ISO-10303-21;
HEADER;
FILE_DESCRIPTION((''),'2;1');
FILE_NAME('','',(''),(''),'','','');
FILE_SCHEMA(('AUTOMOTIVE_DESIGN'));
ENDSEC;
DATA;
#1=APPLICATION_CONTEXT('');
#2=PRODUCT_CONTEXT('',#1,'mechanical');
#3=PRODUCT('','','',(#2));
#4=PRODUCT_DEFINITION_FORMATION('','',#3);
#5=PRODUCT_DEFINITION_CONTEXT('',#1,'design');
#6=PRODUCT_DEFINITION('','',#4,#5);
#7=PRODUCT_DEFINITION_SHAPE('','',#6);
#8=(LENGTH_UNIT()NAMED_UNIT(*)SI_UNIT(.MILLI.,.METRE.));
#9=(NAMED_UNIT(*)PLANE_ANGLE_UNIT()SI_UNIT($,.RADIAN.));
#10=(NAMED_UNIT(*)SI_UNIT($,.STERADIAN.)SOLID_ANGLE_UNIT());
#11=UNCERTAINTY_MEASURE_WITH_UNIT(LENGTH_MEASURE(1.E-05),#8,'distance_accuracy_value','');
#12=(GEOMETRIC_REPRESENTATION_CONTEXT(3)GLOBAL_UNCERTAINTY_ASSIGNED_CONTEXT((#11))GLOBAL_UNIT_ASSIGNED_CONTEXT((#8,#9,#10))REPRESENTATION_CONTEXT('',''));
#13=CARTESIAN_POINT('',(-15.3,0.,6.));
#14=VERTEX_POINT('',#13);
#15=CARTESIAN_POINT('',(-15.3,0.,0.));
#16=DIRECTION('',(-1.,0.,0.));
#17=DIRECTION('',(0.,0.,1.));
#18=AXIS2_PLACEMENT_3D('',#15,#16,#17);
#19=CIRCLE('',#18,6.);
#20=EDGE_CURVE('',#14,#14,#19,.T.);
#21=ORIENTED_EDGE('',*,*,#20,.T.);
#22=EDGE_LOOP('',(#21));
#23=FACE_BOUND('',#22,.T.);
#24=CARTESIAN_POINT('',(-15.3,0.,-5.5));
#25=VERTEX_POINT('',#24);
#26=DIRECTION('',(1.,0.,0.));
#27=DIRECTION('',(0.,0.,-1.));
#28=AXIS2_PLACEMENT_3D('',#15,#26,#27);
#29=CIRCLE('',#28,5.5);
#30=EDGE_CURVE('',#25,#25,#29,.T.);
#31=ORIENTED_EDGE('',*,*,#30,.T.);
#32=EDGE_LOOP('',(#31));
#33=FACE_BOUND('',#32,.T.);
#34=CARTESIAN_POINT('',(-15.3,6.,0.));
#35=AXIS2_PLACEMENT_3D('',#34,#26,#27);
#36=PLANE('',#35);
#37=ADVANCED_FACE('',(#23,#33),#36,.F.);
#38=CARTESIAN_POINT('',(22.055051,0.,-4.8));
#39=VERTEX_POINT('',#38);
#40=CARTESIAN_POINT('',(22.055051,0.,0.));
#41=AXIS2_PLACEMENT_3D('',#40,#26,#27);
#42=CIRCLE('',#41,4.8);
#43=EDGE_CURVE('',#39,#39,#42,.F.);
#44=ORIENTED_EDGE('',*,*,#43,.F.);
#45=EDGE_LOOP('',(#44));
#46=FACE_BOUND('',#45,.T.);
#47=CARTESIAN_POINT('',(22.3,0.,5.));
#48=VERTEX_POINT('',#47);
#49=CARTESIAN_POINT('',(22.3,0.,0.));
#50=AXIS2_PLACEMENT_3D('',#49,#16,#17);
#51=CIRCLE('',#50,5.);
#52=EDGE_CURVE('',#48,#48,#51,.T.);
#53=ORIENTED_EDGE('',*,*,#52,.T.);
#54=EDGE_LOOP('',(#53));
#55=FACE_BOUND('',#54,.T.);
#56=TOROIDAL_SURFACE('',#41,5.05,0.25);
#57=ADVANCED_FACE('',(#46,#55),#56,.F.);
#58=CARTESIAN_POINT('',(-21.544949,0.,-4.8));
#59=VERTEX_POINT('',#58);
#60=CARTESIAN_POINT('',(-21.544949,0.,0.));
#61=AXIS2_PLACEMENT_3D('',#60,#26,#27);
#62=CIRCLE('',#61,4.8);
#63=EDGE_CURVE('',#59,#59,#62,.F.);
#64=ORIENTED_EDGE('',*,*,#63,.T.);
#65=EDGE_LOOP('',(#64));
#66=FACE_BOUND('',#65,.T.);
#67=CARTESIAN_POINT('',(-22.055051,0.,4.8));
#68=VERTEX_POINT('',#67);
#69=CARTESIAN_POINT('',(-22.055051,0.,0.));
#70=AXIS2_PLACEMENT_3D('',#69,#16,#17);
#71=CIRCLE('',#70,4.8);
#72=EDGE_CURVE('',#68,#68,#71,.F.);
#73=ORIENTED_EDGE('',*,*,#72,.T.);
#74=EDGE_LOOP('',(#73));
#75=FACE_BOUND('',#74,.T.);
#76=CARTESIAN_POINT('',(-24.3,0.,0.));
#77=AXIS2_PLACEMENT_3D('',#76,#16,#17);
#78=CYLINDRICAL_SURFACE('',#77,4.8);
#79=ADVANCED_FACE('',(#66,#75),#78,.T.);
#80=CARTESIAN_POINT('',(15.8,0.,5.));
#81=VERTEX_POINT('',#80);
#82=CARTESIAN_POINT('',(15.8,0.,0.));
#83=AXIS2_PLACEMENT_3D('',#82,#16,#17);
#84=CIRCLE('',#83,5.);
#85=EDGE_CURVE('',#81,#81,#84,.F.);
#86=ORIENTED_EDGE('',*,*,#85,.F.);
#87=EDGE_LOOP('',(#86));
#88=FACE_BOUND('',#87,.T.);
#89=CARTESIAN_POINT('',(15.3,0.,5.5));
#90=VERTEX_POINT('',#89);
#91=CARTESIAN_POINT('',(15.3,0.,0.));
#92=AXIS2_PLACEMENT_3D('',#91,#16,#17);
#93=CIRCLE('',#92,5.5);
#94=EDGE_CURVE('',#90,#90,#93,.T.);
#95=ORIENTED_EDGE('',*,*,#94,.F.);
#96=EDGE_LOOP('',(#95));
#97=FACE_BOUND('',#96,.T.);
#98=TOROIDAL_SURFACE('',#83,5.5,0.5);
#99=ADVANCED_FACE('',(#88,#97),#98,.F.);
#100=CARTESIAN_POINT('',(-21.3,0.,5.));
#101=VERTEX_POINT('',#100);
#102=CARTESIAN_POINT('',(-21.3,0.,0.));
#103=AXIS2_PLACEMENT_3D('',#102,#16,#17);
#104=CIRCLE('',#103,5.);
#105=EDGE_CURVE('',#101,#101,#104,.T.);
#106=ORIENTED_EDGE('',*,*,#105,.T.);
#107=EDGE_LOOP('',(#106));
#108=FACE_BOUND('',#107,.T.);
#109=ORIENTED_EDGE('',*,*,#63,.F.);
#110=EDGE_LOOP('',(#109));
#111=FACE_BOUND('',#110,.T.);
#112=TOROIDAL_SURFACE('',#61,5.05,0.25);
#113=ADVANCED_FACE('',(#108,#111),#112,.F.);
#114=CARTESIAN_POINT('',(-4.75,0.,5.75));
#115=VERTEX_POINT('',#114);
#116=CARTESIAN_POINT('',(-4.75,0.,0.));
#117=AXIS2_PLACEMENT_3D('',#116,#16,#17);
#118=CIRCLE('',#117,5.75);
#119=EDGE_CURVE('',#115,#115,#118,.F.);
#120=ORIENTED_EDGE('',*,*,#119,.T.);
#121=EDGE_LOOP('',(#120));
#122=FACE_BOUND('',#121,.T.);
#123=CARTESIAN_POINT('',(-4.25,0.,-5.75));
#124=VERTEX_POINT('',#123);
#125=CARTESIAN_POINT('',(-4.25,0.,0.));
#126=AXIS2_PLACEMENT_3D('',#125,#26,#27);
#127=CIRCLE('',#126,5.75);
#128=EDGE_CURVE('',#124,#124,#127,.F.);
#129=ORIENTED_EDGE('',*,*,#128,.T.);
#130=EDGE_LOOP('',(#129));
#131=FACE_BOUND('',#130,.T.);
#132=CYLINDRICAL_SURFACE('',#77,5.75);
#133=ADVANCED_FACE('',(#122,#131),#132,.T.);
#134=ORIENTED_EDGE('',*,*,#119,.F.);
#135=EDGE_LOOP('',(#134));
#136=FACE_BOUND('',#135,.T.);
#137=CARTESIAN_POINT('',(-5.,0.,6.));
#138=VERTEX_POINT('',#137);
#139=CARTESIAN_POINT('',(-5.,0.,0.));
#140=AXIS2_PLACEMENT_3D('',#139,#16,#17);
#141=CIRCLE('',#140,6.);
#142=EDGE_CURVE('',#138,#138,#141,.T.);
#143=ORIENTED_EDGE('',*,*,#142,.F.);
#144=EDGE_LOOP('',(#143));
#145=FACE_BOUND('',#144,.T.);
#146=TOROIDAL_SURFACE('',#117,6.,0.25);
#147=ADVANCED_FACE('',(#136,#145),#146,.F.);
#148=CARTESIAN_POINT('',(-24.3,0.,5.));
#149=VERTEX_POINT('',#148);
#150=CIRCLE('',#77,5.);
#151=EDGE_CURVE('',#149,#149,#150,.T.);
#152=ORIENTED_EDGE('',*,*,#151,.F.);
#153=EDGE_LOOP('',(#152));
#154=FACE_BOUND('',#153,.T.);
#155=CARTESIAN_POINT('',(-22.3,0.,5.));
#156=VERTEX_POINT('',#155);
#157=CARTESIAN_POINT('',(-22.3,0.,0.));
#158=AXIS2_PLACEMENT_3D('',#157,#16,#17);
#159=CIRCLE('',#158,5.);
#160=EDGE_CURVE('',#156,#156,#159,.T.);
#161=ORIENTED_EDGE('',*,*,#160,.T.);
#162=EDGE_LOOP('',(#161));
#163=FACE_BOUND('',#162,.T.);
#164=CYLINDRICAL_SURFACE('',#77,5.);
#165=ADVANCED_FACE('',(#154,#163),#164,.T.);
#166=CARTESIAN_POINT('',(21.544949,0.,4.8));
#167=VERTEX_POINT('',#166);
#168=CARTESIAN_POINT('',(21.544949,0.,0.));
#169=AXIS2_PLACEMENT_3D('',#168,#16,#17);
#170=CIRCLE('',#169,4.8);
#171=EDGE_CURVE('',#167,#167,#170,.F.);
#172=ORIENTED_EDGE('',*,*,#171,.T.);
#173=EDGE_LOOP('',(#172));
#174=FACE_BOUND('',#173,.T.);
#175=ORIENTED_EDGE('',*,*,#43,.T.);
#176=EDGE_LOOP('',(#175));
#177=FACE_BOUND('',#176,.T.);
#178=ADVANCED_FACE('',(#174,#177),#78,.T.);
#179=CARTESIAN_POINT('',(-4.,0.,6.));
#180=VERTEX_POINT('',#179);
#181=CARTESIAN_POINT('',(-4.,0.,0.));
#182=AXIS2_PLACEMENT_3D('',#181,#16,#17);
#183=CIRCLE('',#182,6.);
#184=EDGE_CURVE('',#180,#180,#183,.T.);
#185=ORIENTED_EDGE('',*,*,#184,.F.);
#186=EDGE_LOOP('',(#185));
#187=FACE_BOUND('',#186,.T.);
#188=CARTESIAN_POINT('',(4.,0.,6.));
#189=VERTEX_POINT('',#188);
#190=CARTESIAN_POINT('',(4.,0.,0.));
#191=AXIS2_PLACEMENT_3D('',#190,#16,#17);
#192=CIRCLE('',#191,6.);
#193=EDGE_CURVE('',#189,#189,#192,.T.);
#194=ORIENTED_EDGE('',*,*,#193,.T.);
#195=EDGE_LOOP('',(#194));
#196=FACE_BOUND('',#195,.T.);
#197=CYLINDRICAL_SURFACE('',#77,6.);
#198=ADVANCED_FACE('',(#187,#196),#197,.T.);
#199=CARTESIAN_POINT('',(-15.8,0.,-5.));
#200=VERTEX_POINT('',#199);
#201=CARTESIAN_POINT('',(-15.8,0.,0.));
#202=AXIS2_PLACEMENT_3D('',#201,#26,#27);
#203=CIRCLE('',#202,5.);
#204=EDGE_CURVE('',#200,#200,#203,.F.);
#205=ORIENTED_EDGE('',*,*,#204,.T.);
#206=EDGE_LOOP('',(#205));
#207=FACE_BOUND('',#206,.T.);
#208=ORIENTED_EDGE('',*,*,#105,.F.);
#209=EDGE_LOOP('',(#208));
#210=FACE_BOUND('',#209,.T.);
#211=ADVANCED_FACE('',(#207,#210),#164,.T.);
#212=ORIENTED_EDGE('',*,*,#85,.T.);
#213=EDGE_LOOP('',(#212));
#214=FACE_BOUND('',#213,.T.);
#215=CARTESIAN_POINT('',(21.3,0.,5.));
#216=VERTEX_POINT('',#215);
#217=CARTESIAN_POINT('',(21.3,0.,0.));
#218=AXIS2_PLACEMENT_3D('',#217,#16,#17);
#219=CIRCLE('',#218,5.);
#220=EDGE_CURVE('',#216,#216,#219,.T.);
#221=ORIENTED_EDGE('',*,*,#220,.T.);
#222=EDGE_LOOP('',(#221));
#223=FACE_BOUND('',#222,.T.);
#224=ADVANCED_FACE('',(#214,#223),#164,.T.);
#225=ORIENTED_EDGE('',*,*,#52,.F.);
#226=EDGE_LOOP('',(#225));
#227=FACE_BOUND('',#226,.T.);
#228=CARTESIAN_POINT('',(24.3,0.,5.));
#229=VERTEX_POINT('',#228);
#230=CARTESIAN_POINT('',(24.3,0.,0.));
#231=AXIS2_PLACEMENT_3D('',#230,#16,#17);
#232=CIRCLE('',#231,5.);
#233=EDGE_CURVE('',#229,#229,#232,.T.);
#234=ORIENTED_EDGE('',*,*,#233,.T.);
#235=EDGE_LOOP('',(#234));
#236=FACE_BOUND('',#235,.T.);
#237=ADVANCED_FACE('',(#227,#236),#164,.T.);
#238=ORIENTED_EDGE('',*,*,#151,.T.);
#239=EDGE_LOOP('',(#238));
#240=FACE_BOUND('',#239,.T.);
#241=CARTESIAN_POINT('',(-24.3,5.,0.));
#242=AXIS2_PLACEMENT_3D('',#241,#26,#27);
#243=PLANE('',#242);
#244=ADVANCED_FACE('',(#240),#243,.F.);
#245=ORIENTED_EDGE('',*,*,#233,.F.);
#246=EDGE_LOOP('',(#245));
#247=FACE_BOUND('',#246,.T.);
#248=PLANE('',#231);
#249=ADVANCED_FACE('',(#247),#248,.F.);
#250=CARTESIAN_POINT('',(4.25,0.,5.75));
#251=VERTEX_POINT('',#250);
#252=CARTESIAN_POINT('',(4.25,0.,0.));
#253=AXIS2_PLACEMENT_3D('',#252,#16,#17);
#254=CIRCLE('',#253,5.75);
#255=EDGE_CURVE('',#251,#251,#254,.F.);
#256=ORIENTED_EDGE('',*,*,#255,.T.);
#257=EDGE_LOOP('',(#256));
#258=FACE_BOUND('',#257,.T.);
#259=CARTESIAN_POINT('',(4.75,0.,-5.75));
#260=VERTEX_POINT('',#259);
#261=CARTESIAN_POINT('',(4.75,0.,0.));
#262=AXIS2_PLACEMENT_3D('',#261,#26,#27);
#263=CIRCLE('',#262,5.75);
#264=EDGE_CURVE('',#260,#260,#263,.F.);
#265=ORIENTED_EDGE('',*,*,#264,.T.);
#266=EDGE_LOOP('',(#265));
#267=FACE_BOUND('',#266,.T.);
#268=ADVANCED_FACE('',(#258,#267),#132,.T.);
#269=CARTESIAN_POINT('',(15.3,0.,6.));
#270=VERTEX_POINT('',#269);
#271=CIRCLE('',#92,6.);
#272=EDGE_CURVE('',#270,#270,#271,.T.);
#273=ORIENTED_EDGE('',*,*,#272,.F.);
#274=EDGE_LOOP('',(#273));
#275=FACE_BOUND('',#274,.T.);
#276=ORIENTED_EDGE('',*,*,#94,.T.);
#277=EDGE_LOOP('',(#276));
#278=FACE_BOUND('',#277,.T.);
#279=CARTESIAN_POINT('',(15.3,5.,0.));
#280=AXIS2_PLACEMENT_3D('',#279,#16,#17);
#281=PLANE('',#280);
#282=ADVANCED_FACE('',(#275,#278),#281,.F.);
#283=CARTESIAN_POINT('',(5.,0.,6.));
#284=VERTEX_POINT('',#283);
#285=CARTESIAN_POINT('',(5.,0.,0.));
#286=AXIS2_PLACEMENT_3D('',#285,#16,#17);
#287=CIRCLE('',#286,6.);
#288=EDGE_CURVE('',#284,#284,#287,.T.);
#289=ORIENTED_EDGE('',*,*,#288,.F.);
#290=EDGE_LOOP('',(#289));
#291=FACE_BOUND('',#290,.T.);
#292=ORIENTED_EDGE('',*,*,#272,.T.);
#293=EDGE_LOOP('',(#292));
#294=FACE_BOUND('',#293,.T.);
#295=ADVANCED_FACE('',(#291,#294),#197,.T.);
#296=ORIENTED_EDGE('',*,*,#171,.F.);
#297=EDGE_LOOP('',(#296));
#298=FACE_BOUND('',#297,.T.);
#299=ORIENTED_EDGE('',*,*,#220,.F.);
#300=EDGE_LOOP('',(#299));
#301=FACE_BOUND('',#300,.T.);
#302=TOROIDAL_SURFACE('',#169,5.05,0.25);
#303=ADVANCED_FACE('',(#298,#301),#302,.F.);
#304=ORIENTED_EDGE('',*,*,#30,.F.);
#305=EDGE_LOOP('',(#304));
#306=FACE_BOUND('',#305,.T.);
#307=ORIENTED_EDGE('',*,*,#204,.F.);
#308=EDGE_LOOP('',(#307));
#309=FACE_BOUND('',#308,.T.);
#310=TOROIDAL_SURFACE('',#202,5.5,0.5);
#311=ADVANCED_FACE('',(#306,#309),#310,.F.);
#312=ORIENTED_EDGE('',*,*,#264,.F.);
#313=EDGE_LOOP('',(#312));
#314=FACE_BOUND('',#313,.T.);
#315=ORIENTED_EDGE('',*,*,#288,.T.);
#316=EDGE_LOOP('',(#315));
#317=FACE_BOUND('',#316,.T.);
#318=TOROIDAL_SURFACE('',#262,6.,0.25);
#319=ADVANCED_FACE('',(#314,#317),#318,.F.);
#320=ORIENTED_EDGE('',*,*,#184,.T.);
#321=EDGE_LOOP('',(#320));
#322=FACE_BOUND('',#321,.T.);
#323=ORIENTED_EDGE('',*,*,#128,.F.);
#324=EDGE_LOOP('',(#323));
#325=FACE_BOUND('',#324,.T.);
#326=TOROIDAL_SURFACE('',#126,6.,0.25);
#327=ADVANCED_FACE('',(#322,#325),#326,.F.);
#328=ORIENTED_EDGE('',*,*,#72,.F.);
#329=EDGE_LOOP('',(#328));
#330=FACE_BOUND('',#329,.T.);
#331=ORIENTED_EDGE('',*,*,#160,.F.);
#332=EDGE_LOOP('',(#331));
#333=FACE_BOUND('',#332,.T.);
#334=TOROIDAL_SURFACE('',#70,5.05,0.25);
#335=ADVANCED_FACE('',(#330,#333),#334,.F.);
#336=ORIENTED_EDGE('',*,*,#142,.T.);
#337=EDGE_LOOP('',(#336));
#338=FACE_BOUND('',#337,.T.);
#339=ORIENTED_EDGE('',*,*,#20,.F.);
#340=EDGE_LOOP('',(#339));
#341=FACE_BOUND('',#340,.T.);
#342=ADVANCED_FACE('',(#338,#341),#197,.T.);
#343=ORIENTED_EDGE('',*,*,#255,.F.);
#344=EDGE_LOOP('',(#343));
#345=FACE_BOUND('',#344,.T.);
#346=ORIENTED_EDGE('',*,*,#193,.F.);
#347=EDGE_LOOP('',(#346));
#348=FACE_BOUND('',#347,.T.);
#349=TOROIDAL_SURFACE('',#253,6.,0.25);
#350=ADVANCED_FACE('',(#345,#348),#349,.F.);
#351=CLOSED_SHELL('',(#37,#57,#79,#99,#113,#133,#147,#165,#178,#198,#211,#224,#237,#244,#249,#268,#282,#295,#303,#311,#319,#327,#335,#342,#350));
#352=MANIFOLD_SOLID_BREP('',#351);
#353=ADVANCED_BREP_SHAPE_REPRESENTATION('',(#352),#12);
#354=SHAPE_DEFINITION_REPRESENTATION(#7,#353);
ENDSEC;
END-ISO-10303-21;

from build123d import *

# Parameters (mm, degrees)
FILLET1_R   = 0.25
FILLET1_R_2 = 0.5


with BuildPart() as part:
    # Sketch1 → Revolve1 (revolve)
    with BuildSketch(Plane.XY, mode=Mode.PRIVATE) as revolve1_sk:
        Polygon((-24.3, 0), (24.3, 0), (24.3, 5), (22.3, 5), (22.3, 4.8), (21.3, 4.8), (21.3, 5), (15.3, 5), (15.3, 6), (5, 6), (5, 5.75), (4, 5.75), (4, 6), (-4, 6), (-4, 5.75), (-5, 5.75), (-5, 6), (-15.3, 6), (-15.3, 5), (-21.3, 5), (-21.3, 4.8), (-22.3, 4.8), (-22.3, 5), (-24.3, 5), align=None)
    revolve(revolve1_sk.sketch.rotate(Axis((-24.3, 0, 0), (1, 0, 0)), 90), axis=Axis((-24.3, 0, 0), (1, 0, 0)))

    # Fillet1
    # the kernel refuses this fillet: 0.5, 0.25 mm, written as the material it adds along each edge
    with BuildSketch(Plane(origin=(-22.3, 0, 0), x_dir=(0, 0, 1), z_dir=(0, 1, 0))) as fillet1_piece_1:
        with BuildLine():
            CenterArc((5.05, 0.244948974), FILLET1_R, 180, 78.463040967)
            Line((5, 0), (4.999, -0.004898979))
            ThreePointArc((4.999, -0.004898979), (4.9, -0.005), (4.8, -0.005))
            Line((4.8, -0.005), (4.795, 0))
            Line((4.795, 0), (4.795, 0.244948974))
            Line((4.795, 0.244948974), (4.8, 0.244948974))
        make_face()
    revolve(axis=Axis((-22.3, 0, 0), (1, 0, 0)))
    with BuildSketch(Plane(origin=(-21.3, 0, 0), x_dir=(0, 0, 1), z_dir=(0, 1, 0))) as fillet1_piece_2:
        with BuildLine():
            CenterArc((5.05, -0.244948974), FILLET1_R, 101.536959033, 78.463040967)
            Line((4.8, -0.244948974), (4.795, -0.244948974))
            Line((4.795, -0.244948974), (4.795, 0))
            Line((4.795, 0), (4.8, 0.005))
            ThreePointArc((4.8, 0.005), (4.9, 0.005), (4.999, 0.004898979))
            Line((4.999, 0.004898979), (5, 0))
        make_face()
    revolve(axis=Axis((-21.3, 0, 0), (1, 0, 0)))
    with BuildSketch(Plane(origin=(21.3, 0, 0), x_dir=(0, 0, 1), z_dir=(0, 1, 0))) as fillet1_piece_3:
        with BuildLine():
            CenterArc((5.05, 0.244948974), FILLET1_R, 180, 78.463040967)
            Line((5, 0), (4.999, -0.004898979))
            ThreePointArc((4.999, -0.004898979), (4.9, -0.005), (4.8, -0.005))
            Line((4.8, -0.005), (4.795, 0))
            Line((4.795, 0), (4.795, 0.244948974))
            Line((4.795, 0.244948974), (4.8, 0.244948974))
        make_face()
    revolve(axis=Axis((21.3, 0, 0), (1, 0, 0)))
    with BuildSketch(Plane(origin=(22.3, 0, 0), x_dir=(0, 0, 1), z_dir=(0, 1, 0))) as fillet1_piece_4:
        with BuildLine():
            CenterArc((5.05, -0.244948974), FILLET1_R, 101.536959033, 78.463040967)
            Line((4.8, -0.244948974), (4.795, -0.244948974))
            Line((4.795, -0.244948974), (4.795, 0))
            Line((4.795, 0), (4.8, 0.005))
            ThreePointArc((4.8, 0.005), (4.9, 0.005), (4.999, 0.004898979))
            Line((4.999, 0.004898979), (5, 0))
        make_face()
    revolve(axis=Axis((22.3, 0, 0), (1, 0, 0)))
    with BuildSketch(Plane(origin=(5, 0, 0), x_dir=(0, 0, 1), z_dir=(0, 1, 0))) as fillet1_piece_5:
        with BuildLine():
            CenterArc((5.75 + FILLET1_R, -FILLET1_R), FILLET1_R, 90, 90)
            Line((5.75, -FILLET1_R), (5.75 - FILLET1_R * 0.02, -FILLET1_R))
            Line((5.75 - FILLET1_R * 0.02, -FILLET1_R), (5.75 - FILLET1_R * 0.02, FILLET1_R * 0.02))
            Line((5.75 - FILLET1_R * 0.02, FILLET1_R * 0.02), (5.75 + FILLET1_R, FILLET1_R * 0.02))
            Line((5.75 + FILLET1_R, FILLET1_R * 0.02), (5.75 + FILLET1_R, 0))
        make_face()
    revolve(axis=Axis((5, 0, 0), (1, 0, 0)))
    with BuildSketch(Plane(origin=(4, 0, 0), x_dir=(0, 0, 1), z_dir=(0, 1, 0))) as fillet1_piece_6:
        with BuildLine():
            CenterArc((5.75 + FILLET1_R, FILLET1_R), FILLET1_R, 180, 90)
            Line((5.75 + FILLET1_R, 0), (5.75 + FILLET1_R, -FILLET1_R * 0.02))
            Line((5.75 + FILLET1_R, -FILLET1_R * 0.02), (5.75 - FILLET1_R * 0.02, -FILLET1_R * 0.02))
            Line((5.75 - FILLET1_R * 0.02, -FILLET1_R * 0.02), (5.75 - FILLET1_R * 0.02, FILLET1_R))
            Line((5.75 - FILLET1_R * 0.02, FILLET1_R), (5.75, FILLET1_R))
        make_face()
    revolve(axis=Axis((4, 0, 0), (1, 0, 0)))
    with BuildSketch(Plane(origin=(-5, 0, 0), x_dir=(0, 0, 1), z_dir=(0, 1, 0))) as fillet1_piece_7:
        with BuildLine():
            CenterArc((5.75 + FILLET1_R, FILLET1_R), FILLET1_R, 180, 90)
            Line((5.75 + FILLET1_R, 0), (5.75 + FILLET1_R, -FILLET1_R * 0.02))
            Line((5.75 + FILLET1_R, -FILLET1_R * 0.02), (5.75 - FILLET1_R * 0.02, -FILLET1_R * 0.02))
            Line((5.75 - FILLET1_R * 0.02, -FILLET1_R * 0.02), (5.75 - FILLET1_R * 0.02, FILLET1_R))
            Line((5.75 - FILLET1_R * 0.02, FILLET1_R), (5.75, FILLET1_R))
        make_face()
    revolve(axis=Axis((-5, 0, 0), (1, 0, 0)))
    with BuildSketch(Plane(origin=(-4, 0, 0), x_dir=(0, 0, 1), z_dir=(0, 1, 0))) as fillet1_piece_8:
        with BuildLine():
            CenterArc((5.75 + FILLET1_R, -FILLET1_R), FILLET1_R, 90, 90)
            Line((5.75, -FILLET1_R), (5.75 - FILLET1_R * 0.02, -FILLET1_R))
            Line((5.75 - FILLET1_R * 0.02, -FILLET1_R), (5.75 - FILLET1_R * 0.02, FILLET1_R * 0.02))
            Line((5.75 - FILLET1_R * 0.02, FILLET1_R * 0.02), (5.75 + FILLET1_R, FILLET1_R * 0.02))
            Line((5.75 + FILLET1_R, FILLET1_R * 0.02), (5.75 + FILLET1_R, 0))
        make_face()
    revolve(axis=Axis((-4, 0, 0), (1, 0, 0)))
    with BuildSketch(Plane(origin=(-15.3, 0, 0), x_dir=(0, 0, 1), z_dir=(0, 1, 0))) as fillet1_piece_9:
        with BuildLine():
            CenterArc((5 + FILLET1_R_2, -FILLET1_R_2), FILLET1_R_2, 90, 90)
            Line((5, -FILLET1_R_2), (5 - FILLET1_R_2 * 0.02, -FILLET1_R_2))
            Line((5 - FILLET1_R_2 * 0.02, -FILLET1_R_2), (5 - FILLET1_R_2 * 0.02, FILLET1_R_2 * 0.02))
            Line((5 - FILLET1_R_2 * 0.02, FILLET1_R_2 * 0.02), (5 + FILLET1_R_2, FILLET1_R_2 * 0.02))
            Line((5 + FILLET1_R_2, FILLET1_R_2 * 0.02), (5 + FILLET1_R_2, 0))
        make_face()
    revolve(axis=Axis((-15.3, 0, 0), (1, 0, 0)))
    with BuildSketch(Plane(origin=(15.3, 0, 0), x_dir=(0, 0, 1), z_dir=(0, 1, 0))) as fillet1_piece_10:
        with BuildLine():
            CenterArc((5 + FILLET1_R_2, FILLET1_R_2), FILLET1_R_2, 180, 90)
            Line((5 + FILLET1_R_2, 0), (5 + FILLET1_R_2, -FILLET1_R_2 * 0.02))
            Line((5 + FILLET1_R_2, -FILLET1_R_2 * 0.02), (5 - FILLET1_R_2 * 0.02, -FILLET1_R_2 * 0.02))
            Line((5 - FILLET1_R_2 * 0.02, -FILLET1_R_2 * 0.02), (5 - FILLET1_R_2 * 0.02, FILLET1_R_2))
            Line((5 - FILLET1_R_2 * 0.02, FILLET1_R_2), (5, FILLET1_R_2))
        make_face()
    revolve(axis=Axis((15.3, 0, 0), (1, 0, 0)))


solid = part.part
